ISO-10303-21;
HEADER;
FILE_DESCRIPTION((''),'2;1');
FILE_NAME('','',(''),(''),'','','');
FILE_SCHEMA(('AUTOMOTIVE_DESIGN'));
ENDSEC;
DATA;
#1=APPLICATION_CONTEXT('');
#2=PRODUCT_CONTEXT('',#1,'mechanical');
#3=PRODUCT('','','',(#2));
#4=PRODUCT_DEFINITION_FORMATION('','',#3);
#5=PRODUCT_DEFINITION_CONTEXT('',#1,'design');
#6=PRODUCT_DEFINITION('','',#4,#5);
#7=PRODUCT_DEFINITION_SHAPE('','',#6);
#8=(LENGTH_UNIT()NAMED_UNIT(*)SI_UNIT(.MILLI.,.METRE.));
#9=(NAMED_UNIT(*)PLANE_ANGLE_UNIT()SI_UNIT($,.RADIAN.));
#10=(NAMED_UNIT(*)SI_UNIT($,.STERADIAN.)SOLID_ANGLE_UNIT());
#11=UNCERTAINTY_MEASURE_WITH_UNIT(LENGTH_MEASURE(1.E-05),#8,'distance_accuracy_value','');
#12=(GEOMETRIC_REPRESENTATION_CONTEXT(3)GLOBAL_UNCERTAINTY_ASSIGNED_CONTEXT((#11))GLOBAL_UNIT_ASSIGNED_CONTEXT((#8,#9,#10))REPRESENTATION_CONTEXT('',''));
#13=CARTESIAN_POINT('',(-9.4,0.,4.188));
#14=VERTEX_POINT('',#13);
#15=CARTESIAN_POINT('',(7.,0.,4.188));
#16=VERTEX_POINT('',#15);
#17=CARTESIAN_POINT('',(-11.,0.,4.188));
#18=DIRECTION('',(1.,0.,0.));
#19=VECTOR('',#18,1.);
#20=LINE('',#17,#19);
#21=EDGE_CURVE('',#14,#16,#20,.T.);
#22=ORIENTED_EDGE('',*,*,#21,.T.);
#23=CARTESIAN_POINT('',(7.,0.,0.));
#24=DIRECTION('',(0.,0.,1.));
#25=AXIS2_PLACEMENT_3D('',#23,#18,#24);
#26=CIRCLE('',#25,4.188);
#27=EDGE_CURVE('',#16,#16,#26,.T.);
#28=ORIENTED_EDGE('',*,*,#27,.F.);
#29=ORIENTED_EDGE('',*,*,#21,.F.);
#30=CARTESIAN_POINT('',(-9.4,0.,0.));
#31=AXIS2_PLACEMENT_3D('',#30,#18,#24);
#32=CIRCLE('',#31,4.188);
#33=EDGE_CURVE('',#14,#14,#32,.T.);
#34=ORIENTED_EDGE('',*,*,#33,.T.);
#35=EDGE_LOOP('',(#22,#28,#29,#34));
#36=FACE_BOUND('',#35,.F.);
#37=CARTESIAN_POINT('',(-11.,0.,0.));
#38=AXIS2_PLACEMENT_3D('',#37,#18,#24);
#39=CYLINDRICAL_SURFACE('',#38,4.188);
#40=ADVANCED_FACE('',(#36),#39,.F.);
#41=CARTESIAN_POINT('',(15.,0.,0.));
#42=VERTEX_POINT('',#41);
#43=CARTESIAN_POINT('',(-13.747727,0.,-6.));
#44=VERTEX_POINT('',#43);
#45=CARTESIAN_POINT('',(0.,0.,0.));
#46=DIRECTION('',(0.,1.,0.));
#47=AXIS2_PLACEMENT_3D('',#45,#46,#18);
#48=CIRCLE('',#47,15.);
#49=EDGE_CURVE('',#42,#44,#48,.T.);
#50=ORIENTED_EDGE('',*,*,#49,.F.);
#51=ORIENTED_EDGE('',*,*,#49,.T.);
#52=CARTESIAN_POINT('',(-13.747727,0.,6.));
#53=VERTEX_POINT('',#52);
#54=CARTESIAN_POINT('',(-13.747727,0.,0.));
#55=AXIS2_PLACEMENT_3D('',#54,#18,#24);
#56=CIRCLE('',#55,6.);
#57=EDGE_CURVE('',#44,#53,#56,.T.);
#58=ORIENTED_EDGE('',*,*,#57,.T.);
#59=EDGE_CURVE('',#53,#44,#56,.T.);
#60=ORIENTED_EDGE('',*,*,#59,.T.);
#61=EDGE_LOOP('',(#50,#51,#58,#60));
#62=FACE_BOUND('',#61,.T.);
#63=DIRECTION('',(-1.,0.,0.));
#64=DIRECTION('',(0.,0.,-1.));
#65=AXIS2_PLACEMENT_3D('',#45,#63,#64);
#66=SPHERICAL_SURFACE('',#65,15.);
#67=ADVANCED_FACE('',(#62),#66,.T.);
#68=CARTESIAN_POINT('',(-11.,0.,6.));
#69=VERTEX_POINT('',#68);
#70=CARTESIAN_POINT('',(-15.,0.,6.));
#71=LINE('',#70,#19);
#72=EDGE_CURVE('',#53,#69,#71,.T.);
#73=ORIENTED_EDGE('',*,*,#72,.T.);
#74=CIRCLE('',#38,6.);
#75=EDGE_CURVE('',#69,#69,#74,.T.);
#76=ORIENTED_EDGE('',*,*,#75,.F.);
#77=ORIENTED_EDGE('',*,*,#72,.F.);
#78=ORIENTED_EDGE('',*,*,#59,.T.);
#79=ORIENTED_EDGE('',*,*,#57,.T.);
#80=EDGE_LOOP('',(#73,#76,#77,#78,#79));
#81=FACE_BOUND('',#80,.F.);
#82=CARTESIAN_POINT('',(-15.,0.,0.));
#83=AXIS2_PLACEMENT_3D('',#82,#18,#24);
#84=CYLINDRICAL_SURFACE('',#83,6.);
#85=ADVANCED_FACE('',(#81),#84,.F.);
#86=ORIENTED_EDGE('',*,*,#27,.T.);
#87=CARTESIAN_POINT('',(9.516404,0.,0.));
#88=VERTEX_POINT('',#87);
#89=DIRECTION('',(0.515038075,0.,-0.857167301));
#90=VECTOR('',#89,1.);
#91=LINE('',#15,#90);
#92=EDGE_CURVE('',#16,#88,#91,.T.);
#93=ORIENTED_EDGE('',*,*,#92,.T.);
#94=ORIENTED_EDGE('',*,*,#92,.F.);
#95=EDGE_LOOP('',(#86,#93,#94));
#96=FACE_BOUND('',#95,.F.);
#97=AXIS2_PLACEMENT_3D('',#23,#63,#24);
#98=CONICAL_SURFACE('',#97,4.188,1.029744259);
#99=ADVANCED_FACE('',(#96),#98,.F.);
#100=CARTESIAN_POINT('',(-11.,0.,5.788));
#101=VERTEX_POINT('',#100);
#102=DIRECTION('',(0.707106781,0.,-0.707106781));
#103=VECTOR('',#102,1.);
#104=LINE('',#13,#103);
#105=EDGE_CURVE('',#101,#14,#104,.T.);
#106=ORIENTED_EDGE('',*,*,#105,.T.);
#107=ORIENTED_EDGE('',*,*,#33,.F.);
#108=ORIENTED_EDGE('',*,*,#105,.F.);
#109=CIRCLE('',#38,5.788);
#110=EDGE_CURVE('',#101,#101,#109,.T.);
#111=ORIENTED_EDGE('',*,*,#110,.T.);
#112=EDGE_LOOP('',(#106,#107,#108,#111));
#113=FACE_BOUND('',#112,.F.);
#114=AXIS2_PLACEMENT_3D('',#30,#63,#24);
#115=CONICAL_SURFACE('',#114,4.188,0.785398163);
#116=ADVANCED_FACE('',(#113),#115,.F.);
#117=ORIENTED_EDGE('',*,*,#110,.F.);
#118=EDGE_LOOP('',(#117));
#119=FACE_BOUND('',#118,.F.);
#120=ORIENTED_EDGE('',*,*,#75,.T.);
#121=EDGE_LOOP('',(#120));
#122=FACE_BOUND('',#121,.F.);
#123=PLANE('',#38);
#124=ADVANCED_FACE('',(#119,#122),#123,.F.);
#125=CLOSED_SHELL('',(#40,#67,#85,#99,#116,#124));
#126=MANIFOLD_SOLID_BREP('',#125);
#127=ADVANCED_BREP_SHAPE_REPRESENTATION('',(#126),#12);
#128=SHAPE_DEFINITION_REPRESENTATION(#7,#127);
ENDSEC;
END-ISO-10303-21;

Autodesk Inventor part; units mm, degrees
ref_plane "XZ Plane" through (0, 0, 0) normal (0, 1, 0) x (-1, 0, 0)
ref_plane "XY Plane" through (0, 0, 0) normal (0, 0, 1) x (1, 0, 0)
sketch "Эскиз1" plane through (0, 0, 0) normal (0, 1, 0) x (-1, 0, 0)
  arc A0 (-15, 0) -> (15, 0) centre (0, 0) ccw
  line L0 (15, 0) -> (-15, 0)
  dimension "d0" = 30
revolve "Вращение1" add sketch "Эскиз1" angle 360 about axis through (-15, 0, 0) along (1, 0, 0)
ref_plane "РабПлоскость1" through (-15, 0, 0) normal (1, 0, 0) x (0, 1, 0)
sketch "Эскиз2" plane through (-15, 0, 0) normal (1, 0, 0) x (0, 1, 0)
  point P0 (0, 0)
  point P1 (0, 0)
hole "Отверстие1" at (-15, 0, 0) direction (1, 0, 0) diameter 8.376 depth 22 tip angle 118 counterbore diameter 12 counterbore depth 4 thread size "M10x1.5" class "6H" standard "ISO Metric profile"
chamfer "Фаска1" distance 1.6 angle 45 1 edges at (-11, 0, -4.188)
properties part number "Ручка-09"
